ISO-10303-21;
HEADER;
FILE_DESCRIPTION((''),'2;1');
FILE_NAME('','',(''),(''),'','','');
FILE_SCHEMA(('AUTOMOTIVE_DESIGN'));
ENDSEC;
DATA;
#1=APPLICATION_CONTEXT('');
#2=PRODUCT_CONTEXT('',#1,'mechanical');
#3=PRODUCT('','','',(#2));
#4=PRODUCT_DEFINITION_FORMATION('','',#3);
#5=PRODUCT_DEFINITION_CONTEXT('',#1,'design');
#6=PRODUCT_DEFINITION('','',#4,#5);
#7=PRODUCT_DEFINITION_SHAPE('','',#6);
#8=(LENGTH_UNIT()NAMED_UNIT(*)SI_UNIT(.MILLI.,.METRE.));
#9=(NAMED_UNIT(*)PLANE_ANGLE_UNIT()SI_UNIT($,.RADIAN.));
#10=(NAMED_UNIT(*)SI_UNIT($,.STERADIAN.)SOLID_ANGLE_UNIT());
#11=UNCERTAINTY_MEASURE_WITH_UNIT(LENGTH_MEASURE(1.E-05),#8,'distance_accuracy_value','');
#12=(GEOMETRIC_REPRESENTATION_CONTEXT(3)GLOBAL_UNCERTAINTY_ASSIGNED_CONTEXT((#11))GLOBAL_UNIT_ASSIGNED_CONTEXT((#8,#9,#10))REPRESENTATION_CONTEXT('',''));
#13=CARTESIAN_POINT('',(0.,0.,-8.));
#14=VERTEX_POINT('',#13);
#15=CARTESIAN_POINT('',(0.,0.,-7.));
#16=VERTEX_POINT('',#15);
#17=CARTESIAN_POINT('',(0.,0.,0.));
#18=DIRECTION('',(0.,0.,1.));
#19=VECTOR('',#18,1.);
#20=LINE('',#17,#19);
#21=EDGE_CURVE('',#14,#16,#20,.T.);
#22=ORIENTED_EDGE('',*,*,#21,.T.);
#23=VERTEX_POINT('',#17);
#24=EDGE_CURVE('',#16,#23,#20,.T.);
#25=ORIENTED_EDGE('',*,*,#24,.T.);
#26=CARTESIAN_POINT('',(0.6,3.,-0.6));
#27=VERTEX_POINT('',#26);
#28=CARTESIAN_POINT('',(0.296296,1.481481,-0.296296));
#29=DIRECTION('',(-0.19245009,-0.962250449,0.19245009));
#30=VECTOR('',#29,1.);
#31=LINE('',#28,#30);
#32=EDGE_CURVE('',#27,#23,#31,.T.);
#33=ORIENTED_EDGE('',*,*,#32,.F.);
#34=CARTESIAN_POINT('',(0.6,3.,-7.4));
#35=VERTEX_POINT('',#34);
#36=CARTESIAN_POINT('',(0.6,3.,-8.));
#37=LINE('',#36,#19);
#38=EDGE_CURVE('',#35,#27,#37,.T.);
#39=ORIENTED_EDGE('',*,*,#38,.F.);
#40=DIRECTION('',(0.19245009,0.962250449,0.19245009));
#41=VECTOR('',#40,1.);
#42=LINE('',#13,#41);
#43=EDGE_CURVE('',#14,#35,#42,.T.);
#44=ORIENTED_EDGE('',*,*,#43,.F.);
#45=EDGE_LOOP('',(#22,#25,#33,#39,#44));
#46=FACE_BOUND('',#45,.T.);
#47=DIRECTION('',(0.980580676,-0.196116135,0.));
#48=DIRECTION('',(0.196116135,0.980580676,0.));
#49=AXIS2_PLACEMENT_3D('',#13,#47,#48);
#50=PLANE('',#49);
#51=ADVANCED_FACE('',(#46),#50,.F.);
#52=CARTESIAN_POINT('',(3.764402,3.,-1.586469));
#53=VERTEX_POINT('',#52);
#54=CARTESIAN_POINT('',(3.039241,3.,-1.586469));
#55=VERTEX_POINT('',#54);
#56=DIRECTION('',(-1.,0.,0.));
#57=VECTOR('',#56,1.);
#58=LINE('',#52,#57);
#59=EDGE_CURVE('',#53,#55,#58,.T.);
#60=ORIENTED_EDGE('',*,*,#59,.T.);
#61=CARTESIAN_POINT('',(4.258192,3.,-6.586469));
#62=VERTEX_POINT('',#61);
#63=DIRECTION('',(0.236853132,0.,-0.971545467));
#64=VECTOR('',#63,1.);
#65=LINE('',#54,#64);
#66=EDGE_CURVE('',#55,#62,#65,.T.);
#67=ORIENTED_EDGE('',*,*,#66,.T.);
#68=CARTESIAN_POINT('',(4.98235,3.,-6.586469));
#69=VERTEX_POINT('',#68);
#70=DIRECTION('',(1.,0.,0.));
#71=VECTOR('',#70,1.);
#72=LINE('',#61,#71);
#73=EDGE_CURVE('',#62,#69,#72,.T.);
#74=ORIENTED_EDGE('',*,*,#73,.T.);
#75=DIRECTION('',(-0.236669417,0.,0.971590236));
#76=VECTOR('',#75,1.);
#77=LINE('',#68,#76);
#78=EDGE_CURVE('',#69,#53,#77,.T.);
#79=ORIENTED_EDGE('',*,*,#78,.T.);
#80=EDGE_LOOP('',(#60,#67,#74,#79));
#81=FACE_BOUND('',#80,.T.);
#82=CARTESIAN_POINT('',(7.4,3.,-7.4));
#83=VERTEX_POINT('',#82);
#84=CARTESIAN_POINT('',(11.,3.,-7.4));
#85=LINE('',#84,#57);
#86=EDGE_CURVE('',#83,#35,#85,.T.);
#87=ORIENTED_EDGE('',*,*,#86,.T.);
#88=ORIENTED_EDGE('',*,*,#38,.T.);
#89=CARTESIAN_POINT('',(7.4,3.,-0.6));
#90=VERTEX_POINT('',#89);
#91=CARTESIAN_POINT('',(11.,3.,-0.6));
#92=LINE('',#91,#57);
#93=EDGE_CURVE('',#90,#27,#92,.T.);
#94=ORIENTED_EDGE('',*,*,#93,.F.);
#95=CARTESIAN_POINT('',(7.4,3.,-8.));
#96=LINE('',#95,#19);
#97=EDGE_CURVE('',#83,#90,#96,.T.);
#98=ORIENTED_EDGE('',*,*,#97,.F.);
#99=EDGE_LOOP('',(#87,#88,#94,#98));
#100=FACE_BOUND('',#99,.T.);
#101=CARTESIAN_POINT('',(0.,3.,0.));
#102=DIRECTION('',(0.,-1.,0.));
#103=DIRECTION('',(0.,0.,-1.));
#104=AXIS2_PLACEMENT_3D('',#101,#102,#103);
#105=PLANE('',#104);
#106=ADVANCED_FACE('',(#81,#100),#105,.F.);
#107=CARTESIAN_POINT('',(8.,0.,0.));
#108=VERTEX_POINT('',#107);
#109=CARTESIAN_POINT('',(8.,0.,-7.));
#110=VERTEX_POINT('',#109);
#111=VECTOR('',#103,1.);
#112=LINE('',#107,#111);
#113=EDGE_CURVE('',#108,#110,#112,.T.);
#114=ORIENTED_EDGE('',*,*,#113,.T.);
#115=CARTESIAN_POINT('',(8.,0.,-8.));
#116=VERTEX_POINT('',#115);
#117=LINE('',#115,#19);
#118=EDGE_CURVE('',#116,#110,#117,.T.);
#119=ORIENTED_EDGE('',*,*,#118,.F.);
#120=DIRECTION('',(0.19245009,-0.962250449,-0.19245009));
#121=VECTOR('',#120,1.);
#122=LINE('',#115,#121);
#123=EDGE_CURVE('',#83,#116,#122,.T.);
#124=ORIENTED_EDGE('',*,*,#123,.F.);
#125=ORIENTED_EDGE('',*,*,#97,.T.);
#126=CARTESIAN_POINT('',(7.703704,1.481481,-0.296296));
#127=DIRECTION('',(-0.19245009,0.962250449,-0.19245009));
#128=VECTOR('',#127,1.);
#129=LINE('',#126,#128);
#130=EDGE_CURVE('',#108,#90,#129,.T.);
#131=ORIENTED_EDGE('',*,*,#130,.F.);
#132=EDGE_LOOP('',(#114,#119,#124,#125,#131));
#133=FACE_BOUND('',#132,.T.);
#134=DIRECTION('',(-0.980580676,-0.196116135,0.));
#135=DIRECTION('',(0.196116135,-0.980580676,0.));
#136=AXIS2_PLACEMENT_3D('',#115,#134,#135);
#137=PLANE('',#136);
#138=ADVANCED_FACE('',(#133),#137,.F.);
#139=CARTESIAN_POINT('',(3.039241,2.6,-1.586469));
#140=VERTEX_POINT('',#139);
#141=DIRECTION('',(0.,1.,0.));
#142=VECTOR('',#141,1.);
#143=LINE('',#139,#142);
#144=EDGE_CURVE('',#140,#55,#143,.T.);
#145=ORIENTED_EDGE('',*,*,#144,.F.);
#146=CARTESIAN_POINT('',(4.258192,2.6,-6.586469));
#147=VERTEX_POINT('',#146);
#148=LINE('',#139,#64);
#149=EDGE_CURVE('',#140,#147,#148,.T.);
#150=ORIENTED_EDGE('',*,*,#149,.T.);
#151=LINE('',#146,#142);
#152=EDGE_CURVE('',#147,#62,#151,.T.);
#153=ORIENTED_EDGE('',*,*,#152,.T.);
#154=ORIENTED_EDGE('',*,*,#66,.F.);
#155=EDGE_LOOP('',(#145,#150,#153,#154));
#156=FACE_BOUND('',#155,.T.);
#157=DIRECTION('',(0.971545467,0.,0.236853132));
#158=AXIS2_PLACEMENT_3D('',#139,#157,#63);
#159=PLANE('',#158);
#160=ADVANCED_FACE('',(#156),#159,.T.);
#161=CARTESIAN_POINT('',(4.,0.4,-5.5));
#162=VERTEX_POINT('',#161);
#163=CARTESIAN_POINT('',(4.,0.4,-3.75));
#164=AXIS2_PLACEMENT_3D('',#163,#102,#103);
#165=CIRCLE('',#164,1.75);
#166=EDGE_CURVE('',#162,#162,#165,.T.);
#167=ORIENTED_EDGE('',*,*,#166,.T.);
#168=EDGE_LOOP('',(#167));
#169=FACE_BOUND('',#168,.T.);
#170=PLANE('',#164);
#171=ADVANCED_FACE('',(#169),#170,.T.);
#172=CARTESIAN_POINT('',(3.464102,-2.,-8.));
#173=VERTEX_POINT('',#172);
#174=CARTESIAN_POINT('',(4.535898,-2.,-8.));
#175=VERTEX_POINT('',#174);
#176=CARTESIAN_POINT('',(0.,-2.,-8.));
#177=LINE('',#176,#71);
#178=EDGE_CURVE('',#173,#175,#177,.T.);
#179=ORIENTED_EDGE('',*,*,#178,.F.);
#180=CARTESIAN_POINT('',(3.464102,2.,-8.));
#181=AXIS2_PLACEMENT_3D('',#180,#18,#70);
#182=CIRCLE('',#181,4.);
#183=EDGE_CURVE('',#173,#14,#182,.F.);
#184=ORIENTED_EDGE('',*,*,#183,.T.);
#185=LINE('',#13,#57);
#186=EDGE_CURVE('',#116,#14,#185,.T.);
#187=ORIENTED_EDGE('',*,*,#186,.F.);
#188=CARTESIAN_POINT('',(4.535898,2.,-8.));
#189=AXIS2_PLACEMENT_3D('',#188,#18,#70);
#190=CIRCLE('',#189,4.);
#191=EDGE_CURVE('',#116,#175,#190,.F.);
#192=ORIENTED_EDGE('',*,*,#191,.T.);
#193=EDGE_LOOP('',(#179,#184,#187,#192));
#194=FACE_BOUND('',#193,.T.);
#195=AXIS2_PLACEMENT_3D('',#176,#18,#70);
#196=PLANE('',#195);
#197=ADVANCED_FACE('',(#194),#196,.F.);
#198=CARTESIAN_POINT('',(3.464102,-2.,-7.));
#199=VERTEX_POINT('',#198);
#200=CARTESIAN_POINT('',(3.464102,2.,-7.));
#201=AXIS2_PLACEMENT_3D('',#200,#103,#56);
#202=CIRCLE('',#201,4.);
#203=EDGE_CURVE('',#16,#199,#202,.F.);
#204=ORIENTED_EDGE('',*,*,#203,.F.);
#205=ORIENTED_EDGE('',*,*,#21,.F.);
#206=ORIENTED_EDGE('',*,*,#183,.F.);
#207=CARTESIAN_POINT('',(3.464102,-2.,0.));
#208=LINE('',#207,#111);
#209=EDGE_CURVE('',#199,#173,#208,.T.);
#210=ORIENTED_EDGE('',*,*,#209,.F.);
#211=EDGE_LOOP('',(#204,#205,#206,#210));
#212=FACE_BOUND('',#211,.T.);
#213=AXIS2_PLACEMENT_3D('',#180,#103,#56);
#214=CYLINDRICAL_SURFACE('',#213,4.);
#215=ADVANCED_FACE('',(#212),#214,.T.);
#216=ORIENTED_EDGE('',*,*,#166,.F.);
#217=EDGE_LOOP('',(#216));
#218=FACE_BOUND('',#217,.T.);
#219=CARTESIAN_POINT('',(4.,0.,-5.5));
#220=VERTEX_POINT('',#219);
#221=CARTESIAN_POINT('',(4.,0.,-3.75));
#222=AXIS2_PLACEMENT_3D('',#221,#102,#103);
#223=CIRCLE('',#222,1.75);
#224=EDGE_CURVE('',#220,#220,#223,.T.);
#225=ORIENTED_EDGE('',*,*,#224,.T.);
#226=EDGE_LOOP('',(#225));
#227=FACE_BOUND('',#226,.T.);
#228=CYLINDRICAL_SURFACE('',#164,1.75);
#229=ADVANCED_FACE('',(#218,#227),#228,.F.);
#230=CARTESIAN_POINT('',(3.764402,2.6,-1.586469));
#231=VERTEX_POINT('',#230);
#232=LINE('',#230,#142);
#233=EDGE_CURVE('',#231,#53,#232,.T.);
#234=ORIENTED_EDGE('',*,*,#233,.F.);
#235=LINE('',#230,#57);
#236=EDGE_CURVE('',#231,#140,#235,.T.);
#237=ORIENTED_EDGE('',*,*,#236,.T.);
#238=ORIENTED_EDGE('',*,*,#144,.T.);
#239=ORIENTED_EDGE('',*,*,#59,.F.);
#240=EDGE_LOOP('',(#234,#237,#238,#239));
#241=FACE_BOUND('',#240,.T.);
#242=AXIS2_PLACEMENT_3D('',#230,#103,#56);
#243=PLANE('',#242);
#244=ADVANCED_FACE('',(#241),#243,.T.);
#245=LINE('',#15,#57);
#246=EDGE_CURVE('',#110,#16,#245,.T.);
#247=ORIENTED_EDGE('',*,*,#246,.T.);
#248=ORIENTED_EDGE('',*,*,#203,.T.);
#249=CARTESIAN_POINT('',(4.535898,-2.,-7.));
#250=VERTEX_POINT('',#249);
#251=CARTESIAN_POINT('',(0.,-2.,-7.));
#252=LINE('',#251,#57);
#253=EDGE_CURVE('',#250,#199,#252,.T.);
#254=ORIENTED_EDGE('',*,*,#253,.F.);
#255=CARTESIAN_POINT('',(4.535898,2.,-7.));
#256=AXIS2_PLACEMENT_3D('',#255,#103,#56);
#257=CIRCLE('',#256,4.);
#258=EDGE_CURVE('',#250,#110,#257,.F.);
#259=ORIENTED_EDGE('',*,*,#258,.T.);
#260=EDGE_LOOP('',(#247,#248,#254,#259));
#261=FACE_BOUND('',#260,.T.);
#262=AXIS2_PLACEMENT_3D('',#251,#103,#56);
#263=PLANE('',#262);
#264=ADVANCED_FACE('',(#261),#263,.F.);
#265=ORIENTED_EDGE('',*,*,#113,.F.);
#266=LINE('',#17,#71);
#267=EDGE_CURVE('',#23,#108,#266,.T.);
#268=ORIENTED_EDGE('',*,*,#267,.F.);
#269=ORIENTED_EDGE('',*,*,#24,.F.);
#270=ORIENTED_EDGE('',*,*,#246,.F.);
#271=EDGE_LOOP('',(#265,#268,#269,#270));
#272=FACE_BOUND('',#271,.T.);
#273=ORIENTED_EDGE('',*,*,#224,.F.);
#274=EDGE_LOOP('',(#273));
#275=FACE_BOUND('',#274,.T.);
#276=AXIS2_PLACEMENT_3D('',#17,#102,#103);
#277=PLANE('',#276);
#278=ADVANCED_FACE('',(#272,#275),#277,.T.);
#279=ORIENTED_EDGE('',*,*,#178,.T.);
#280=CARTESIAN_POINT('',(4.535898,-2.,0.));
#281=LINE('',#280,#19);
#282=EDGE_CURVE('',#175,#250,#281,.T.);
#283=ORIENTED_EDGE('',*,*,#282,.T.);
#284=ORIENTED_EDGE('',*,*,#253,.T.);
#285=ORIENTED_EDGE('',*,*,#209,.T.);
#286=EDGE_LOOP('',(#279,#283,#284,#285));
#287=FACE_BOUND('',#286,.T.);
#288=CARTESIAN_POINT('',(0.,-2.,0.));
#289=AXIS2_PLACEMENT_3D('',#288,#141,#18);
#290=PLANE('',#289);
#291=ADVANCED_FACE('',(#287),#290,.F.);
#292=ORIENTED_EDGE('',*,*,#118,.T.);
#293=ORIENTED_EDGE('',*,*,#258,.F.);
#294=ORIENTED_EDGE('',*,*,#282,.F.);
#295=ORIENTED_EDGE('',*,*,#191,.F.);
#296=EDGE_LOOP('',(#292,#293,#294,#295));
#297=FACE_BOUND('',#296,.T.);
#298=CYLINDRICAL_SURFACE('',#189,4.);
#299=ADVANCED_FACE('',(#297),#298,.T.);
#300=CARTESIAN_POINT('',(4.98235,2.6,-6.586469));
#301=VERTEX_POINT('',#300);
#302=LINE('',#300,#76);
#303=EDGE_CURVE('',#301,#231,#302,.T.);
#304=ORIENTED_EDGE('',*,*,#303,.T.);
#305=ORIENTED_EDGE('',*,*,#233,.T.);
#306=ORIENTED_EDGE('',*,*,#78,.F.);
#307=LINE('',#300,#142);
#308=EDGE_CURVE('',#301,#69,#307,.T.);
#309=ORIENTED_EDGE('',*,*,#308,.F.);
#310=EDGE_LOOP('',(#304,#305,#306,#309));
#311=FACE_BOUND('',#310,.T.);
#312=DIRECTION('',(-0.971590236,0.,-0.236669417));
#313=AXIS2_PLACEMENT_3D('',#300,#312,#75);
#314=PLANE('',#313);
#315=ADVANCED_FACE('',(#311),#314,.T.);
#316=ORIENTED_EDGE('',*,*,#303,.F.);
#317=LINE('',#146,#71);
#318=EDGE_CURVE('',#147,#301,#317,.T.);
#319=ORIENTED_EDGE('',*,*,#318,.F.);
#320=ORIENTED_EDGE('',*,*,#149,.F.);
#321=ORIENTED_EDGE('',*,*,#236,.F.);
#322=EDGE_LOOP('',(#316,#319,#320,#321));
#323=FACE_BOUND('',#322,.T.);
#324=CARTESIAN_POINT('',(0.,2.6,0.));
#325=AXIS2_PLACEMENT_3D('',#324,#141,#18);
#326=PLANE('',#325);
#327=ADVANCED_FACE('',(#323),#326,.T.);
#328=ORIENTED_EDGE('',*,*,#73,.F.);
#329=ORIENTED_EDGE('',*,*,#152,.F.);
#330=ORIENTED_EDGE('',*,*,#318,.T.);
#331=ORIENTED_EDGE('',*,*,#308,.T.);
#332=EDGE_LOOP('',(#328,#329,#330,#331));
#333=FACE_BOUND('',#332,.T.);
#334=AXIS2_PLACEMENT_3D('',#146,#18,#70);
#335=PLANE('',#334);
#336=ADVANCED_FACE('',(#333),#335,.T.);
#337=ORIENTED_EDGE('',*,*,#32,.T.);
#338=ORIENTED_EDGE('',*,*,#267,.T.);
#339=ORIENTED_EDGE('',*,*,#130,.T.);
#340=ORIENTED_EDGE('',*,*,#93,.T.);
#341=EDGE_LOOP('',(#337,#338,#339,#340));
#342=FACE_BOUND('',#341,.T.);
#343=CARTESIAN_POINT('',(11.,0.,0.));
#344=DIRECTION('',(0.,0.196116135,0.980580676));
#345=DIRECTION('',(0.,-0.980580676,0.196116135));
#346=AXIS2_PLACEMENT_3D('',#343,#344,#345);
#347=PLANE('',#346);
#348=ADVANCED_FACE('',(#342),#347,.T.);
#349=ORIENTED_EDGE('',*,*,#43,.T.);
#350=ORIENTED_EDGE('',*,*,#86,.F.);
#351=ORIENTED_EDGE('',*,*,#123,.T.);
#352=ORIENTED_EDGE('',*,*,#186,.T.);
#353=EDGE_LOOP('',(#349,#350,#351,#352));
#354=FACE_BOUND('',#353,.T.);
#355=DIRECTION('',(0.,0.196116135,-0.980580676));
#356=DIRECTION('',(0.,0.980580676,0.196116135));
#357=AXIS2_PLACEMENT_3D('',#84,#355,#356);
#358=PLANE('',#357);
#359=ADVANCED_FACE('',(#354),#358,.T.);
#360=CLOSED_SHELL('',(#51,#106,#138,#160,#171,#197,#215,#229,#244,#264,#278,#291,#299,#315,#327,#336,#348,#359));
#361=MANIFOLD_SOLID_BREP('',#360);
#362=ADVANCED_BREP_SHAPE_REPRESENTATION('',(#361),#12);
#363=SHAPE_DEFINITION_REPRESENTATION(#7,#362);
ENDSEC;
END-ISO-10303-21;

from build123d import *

# Parameters (mm, degrees)
SKETCH1_W               = 8
SKETCH1_H               = 8
BOSS_EXTRUDE1_DEPTH     = 3
CUT_EXTRUDE1_DEPTH      = 12.704699911
CUT_EXTRUDE1_DEPTH_BACK = 12.704699911
CUT_EXTRUDE2_DEPTH      = 11
SKETCH4_R               = 1.75
CUT_EXTRUDE3_DEPTH      = 0.4
SKETCH5_W               = 8
SKETCH5_H               = 1
BOSS_EXTRUDE2_DEPTH     = 2
FILLET1_R               = 4
CUT_EXTRUDE4_DEPTH      = 0.4


with BuildPart() as part:
    # Sketch1 → Boss-Extrude1 (new body)
    with BuildSketch(Plane(origin=(0, 0, 0), x_dir=(1, 0, 0), z_dir=(0, 1, 0))):
        with Locations((4, 4)):
            Rectangle(SKETCH1_W, SKETCH1_H)
    extrude(amount=BOSS_EXTRUDE1_DEPTH)

    # Sketch2 → Cut-Extrude1 (cut, two sides: drawn at the far end of the back side and taken through both)
    with BuildSketch(Plane.XY.offset(-CUT_EXTRUDE1_DEPTH_BACK)):
        Polygon((0, 0), (0.6, 3), (0, 3), align=None)
        Polygon((8, 0), (7.4, 3), (8, 3), align=None)
    extrude(amount=CUT_EXTRUDE1_DEPTH + CUT_EXTRUDE1_DEPTH_BACK, mode=Mode.SUBTRACT)

    # Sketch3 → Cut-Extrude2 (cut)
    with BuildSketch(Plane(origin=(0, 0, 0), x_dir=(0, 0, -1), z_dir=(1, 0, 0))):
        Polygon((0, 0), (0.6, 3), (0, 3), align=None)
        Polygon((8, 3), (7.4, 3), (8, 0), align=None)
    extrude(amount=CUT_EXTRUDE2_DEPTH, mode=Mode.SUBTRACT)

    # Sketch4 → Cut-Extrude3 (cut)
    with BuildSketch(Plane.XZ):
        with Locations(Location((4, -3.75, 0), (0, 0, 270))):
            Circle(SKETCH4_R)
    extrude(amount=-CUT_EXTRUDE3_DEPTH, mode=Mode.SUBTRACT)

    # Sketch5 → Boss-Extrude2 (add)
    with BuildSketch(Plane.XZ):
        with Locations((4, -7.5)):
            Rectangle(SKETCH5_W, SKETCH5_H)
    extrude(amount=BOSS_EXTRUDE2_DEPTH)

    # Fillet1
    # the kernel refuses this fillet: 4 mm, written as the material it takes off along each edge
    with BuildSketch(Plane(origin=(8, -2, -16.660254038), x_dir=(0, 1, 0), z_dir=(0, 0, 1)), Plane(origin=(0, -2, 1.660254038), x_dir=(0, 1, 0), z_dir=(0, 0, -1))) as fillet1_piece_1:
        with BuildLine():
            CenterArc((4, 3.464101615), FILLET1_R, 180, 60)
            Line((0, 3.464101615), (-0.08, 3.464101615))
            Line((-0.08, 3.464101615), (-0.08, 0))
            Line((-0.08, 0), (0, -0.08))
            ThreePointArc((0, -0.08), (1, -0.08), (1.96, -0.069282032))
            Line((1.96, -0.069282032), (2, 0))
        make_face()
    extrude(amount=18.320508076, mode=Mode.SUBTRACT)

    # Sketch6 → Cut-Extrude4 (cut)
    with BuildSketch(Plane(origin=(0, 3, 0), x_dir=(1, 0, 0), z_dir=(0, 1, 0))):
        Polygon((3.039241423, 1.586469201), (4.258191744, 6.586469201), (4.982350398, 6.586469201), (3.76440168, 1.586469201), align=None)
    extrude(amount=-CUT_EXTRUDE4_DEPTH, mode=Mode.SUBTRACT)


solid = part.part
